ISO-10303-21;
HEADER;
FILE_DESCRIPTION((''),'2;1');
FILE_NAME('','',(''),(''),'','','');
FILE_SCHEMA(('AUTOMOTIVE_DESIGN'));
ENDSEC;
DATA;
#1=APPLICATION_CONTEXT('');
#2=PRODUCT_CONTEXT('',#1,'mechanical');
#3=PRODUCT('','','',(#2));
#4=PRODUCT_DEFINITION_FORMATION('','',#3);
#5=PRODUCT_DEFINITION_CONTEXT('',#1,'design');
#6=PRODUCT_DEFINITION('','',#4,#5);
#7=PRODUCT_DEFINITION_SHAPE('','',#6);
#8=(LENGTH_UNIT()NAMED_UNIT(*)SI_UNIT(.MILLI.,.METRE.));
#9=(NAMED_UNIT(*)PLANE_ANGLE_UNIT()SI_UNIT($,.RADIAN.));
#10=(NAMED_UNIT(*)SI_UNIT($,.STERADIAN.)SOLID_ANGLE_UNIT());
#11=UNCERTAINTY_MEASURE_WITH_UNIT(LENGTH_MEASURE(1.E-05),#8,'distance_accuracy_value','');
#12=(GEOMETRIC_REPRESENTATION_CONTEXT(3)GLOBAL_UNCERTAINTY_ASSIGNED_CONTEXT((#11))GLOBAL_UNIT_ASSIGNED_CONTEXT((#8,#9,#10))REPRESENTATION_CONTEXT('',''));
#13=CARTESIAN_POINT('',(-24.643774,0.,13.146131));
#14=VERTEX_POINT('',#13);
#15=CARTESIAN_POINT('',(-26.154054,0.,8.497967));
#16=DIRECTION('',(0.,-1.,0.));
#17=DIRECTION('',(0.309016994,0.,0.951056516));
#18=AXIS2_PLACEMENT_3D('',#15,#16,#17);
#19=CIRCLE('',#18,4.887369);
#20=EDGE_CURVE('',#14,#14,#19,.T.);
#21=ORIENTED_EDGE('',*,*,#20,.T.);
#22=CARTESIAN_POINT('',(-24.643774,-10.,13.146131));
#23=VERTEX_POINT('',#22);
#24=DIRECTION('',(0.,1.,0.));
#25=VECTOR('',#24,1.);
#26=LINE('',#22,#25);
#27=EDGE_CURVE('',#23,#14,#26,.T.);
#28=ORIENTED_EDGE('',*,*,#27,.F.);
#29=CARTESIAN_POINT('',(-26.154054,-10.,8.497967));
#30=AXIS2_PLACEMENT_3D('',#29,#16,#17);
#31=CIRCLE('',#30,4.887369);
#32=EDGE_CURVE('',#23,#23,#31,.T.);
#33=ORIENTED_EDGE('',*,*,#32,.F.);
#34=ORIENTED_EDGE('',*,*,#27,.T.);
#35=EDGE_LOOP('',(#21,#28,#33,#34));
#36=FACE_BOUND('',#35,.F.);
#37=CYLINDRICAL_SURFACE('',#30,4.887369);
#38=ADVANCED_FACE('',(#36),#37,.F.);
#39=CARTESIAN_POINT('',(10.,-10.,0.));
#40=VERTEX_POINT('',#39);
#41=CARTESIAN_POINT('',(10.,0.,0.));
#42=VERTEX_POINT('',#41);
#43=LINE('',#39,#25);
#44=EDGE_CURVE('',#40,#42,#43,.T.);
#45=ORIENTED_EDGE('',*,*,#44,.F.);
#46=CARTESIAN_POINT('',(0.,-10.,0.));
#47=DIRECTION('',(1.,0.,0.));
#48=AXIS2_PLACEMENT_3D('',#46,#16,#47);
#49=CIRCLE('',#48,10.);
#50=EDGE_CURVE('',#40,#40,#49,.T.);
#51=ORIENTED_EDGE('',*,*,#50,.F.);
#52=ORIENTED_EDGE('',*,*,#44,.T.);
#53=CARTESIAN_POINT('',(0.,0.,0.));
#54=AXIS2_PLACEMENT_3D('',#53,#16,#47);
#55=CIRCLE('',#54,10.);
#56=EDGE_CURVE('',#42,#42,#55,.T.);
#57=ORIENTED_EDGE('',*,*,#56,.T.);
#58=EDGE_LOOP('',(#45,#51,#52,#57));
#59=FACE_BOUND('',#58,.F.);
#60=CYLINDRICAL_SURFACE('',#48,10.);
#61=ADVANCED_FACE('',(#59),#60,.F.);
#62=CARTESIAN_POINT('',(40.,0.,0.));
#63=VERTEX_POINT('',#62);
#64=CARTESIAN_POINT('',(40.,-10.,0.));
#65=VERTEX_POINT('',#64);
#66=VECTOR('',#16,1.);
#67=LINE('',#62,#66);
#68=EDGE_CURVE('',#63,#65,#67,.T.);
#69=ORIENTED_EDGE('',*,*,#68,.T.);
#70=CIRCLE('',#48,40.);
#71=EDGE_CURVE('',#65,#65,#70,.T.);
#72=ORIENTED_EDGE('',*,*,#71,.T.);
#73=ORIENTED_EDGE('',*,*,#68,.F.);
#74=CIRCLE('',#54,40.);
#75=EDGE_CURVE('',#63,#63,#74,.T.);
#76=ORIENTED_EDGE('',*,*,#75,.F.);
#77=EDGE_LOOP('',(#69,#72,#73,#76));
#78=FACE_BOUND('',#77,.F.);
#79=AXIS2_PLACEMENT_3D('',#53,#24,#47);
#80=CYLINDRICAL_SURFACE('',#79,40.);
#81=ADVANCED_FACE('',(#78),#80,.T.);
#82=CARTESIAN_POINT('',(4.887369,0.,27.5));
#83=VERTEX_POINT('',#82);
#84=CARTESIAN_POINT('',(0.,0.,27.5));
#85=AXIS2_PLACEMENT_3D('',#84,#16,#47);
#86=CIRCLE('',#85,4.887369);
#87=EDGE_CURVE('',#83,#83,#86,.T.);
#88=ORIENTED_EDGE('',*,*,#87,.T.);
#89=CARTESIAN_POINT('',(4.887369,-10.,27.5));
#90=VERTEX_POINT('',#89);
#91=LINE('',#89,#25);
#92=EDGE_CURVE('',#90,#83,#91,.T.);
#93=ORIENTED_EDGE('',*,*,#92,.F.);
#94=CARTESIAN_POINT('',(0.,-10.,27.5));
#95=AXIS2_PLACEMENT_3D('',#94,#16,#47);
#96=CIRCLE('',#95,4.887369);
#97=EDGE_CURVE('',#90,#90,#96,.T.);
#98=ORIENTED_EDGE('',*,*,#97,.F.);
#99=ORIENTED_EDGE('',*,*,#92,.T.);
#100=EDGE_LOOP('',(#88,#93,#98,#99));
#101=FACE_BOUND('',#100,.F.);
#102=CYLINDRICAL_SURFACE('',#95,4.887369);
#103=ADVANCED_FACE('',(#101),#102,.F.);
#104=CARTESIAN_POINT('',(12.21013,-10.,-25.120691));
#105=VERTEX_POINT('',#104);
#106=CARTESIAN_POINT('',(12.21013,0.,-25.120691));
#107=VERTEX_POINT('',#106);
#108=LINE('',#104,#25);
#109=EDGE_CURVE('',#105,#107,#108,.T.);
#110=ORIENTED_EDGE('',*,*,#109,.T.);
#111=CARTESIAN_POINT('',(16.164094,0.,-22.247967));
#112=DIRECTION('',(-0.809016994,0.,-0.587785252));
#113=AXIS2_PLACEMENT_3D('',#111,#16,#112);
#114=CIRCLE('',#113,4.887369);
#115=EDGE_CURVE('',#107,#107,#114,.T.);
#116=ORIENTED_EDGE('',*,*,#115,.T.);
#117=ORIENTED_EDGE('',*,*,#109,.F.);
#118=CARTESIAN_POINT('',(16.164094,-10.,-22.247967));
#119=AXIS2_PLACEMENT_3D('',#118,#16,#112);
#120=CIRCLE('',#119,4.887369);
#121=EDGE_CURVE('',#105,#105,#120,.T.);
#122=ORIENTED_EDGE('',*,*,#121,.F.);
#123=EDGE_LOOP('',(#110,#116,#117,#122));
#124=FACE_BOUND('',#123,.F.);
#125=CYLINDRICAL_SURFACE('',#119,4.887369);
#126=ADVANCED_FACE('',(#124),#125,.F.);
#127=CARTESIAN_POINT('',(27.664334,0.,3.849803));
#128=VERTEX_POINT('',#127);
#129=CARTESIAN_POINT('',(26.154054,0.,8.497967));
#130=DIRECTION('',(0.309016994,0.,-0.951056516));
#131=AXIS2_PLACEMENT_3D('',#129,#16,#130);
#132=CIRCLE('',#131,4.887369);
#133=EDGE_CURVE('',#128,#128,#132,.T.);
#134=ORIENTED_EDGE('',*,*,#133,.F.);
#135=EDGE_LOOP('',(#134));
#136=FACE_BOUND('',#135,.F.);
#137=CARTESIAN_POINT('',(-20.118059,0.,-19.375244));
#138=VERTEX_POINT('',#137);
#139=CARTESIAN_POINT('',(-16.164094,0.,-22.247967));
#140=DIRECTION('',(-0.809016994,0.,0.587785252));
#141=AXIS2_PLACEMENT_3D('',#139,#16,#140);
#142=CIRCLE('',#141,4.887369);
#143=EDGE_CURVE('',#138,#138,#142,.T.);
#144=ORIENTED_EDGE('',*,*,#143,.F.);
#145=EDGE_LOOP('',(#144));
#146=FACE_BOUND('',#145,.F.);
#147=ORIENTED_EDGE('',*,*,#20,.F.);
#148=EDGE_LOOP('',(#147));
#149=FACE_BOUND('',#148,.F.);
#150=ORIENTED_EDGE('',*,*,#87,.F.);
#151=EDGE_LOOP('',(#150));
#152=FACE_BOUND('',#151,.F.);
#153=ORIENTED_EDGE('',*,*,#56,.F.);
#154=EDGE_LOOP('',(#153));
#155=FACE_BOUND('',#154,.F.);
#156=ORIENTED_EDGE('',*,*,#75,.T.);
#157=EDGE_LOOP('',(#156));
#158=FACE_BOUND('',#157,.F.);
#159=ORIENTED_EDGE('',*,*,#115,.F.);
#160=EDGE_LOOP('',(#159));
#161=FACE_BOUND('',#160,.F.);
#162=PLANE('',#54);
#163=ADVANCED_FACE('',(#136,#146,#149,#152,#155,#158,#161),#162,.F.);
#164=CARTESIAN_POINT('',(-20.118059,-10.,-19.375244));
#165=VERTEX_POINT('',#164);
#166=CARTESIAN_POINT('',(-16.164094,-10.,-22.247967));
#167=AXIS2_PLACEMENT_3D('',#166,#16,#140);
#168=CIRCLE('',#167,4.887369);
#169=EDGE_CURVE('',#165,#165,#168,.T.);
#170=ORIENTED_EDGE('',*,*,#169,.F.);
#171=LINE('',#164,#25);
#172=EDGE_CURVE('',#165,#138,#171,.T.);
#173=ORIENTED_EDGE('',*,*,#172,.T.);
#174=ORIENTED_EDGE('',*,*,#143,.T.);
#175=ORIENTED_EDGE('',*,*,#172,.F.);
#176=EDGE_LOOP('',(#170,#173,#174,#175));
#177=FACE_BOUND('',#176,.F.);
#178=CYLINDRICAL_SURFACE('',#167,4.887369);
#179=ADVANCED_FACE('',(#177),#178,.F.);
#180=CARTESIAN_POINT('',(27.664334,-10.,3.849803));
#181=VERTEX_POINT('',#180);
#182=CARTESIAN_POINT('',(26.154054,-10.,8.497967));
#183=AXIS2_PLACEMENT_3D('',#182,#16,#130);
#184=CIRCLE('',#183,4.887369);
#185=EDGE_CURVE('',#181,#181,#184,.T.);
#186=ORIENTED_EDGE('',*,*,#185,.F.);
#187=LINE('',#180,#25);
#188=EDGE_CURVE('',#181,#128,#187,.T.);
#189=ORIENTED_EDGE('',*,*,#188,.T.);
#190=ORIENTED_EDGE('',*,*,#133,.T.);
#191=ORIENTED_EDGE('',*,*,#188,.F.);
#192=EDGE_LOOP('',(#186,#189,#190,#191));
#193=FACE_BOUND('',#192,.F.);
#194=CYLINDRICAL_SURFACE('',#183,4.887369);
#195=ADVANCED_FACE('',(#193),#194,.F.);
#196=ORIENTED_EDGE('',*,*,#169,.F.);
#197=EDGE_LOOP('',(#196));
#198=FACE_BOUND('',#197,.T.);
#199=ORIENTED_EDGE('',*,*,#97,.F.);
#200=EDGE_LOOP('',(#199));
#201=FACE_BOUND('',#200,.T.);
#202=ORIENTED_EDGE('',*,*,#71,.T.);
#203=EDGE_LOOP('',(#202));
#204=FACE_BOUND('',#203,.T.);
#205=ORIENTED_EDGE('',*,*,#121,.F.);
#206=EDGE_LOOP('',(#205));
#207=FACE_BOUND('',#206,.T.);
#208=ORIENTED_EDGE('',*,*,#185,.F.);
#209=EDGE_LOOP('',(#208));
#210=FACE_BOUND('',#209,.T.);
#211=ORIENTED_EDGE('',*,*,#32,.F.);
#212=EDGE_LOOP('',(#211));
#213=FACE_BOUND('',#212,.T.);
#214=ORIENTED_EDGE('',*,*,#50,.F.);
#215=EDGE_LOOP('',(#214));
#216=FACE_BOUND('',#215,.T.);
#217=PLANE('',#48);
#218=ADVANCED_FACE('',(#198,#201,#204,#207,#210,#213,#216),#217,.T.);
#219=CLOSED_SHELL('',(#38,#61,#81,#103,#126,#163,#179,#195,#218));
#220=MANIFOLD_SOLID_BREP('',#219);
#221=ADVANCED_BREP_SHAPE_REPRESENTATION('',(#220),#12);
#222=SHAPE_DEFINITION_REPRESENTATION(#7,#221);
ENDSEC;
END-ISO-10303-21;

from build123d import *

# Parameters (mm, degrees)
F0_R            = 40
F1_DEPTH        = 10
F2_R            = 4.8873689042
F3_DEPTH        = 25
F3_COPIES_COUNT = 5
F4_R            = 10
F5_DEPTH        = 25


# Not quite as in the source:
# - a pattern or mirror of a feature is missing from the dataset's text; its kind, count and spacing are read off the source's solid


with BuildPart() as f1:
    # F0 (on Front) → F1 (new body)
    with BuildSketch(Plane.XZ):
        Circle(F0_R)
    extrude(amount=F1_DEPTH)

    # F2 (on face) → F3 (cut)
    with BuildSketch(Plane.XZ.offset(10)):
        with Locations((0, 27.5)):
            Circle(F2_R)
    f3 = extrude(amount=-F3_DEPTH, mode=Mode.SUBTRACT)

    # F3_copies: F3 ×5 about axis
    f3_copies_axis = Axis((0, 0, 0), (0, 1, 0))
    for i in range(1, F3_COPIES_COUNT):
        add(f3.rotate(f3_copies_axis, i * 360 / F3_COPIES_COUNT), mode=Mode.SUBTRACT)

    # F4 (on face) → F5 (cut)
    with BuildSketch(Plane.XZ.offset(10)):
        Circle(F4_R)
    extrude(amount=-F5_DEPTH, mode=Mode.SUBTRACT)


solid = f1.part
